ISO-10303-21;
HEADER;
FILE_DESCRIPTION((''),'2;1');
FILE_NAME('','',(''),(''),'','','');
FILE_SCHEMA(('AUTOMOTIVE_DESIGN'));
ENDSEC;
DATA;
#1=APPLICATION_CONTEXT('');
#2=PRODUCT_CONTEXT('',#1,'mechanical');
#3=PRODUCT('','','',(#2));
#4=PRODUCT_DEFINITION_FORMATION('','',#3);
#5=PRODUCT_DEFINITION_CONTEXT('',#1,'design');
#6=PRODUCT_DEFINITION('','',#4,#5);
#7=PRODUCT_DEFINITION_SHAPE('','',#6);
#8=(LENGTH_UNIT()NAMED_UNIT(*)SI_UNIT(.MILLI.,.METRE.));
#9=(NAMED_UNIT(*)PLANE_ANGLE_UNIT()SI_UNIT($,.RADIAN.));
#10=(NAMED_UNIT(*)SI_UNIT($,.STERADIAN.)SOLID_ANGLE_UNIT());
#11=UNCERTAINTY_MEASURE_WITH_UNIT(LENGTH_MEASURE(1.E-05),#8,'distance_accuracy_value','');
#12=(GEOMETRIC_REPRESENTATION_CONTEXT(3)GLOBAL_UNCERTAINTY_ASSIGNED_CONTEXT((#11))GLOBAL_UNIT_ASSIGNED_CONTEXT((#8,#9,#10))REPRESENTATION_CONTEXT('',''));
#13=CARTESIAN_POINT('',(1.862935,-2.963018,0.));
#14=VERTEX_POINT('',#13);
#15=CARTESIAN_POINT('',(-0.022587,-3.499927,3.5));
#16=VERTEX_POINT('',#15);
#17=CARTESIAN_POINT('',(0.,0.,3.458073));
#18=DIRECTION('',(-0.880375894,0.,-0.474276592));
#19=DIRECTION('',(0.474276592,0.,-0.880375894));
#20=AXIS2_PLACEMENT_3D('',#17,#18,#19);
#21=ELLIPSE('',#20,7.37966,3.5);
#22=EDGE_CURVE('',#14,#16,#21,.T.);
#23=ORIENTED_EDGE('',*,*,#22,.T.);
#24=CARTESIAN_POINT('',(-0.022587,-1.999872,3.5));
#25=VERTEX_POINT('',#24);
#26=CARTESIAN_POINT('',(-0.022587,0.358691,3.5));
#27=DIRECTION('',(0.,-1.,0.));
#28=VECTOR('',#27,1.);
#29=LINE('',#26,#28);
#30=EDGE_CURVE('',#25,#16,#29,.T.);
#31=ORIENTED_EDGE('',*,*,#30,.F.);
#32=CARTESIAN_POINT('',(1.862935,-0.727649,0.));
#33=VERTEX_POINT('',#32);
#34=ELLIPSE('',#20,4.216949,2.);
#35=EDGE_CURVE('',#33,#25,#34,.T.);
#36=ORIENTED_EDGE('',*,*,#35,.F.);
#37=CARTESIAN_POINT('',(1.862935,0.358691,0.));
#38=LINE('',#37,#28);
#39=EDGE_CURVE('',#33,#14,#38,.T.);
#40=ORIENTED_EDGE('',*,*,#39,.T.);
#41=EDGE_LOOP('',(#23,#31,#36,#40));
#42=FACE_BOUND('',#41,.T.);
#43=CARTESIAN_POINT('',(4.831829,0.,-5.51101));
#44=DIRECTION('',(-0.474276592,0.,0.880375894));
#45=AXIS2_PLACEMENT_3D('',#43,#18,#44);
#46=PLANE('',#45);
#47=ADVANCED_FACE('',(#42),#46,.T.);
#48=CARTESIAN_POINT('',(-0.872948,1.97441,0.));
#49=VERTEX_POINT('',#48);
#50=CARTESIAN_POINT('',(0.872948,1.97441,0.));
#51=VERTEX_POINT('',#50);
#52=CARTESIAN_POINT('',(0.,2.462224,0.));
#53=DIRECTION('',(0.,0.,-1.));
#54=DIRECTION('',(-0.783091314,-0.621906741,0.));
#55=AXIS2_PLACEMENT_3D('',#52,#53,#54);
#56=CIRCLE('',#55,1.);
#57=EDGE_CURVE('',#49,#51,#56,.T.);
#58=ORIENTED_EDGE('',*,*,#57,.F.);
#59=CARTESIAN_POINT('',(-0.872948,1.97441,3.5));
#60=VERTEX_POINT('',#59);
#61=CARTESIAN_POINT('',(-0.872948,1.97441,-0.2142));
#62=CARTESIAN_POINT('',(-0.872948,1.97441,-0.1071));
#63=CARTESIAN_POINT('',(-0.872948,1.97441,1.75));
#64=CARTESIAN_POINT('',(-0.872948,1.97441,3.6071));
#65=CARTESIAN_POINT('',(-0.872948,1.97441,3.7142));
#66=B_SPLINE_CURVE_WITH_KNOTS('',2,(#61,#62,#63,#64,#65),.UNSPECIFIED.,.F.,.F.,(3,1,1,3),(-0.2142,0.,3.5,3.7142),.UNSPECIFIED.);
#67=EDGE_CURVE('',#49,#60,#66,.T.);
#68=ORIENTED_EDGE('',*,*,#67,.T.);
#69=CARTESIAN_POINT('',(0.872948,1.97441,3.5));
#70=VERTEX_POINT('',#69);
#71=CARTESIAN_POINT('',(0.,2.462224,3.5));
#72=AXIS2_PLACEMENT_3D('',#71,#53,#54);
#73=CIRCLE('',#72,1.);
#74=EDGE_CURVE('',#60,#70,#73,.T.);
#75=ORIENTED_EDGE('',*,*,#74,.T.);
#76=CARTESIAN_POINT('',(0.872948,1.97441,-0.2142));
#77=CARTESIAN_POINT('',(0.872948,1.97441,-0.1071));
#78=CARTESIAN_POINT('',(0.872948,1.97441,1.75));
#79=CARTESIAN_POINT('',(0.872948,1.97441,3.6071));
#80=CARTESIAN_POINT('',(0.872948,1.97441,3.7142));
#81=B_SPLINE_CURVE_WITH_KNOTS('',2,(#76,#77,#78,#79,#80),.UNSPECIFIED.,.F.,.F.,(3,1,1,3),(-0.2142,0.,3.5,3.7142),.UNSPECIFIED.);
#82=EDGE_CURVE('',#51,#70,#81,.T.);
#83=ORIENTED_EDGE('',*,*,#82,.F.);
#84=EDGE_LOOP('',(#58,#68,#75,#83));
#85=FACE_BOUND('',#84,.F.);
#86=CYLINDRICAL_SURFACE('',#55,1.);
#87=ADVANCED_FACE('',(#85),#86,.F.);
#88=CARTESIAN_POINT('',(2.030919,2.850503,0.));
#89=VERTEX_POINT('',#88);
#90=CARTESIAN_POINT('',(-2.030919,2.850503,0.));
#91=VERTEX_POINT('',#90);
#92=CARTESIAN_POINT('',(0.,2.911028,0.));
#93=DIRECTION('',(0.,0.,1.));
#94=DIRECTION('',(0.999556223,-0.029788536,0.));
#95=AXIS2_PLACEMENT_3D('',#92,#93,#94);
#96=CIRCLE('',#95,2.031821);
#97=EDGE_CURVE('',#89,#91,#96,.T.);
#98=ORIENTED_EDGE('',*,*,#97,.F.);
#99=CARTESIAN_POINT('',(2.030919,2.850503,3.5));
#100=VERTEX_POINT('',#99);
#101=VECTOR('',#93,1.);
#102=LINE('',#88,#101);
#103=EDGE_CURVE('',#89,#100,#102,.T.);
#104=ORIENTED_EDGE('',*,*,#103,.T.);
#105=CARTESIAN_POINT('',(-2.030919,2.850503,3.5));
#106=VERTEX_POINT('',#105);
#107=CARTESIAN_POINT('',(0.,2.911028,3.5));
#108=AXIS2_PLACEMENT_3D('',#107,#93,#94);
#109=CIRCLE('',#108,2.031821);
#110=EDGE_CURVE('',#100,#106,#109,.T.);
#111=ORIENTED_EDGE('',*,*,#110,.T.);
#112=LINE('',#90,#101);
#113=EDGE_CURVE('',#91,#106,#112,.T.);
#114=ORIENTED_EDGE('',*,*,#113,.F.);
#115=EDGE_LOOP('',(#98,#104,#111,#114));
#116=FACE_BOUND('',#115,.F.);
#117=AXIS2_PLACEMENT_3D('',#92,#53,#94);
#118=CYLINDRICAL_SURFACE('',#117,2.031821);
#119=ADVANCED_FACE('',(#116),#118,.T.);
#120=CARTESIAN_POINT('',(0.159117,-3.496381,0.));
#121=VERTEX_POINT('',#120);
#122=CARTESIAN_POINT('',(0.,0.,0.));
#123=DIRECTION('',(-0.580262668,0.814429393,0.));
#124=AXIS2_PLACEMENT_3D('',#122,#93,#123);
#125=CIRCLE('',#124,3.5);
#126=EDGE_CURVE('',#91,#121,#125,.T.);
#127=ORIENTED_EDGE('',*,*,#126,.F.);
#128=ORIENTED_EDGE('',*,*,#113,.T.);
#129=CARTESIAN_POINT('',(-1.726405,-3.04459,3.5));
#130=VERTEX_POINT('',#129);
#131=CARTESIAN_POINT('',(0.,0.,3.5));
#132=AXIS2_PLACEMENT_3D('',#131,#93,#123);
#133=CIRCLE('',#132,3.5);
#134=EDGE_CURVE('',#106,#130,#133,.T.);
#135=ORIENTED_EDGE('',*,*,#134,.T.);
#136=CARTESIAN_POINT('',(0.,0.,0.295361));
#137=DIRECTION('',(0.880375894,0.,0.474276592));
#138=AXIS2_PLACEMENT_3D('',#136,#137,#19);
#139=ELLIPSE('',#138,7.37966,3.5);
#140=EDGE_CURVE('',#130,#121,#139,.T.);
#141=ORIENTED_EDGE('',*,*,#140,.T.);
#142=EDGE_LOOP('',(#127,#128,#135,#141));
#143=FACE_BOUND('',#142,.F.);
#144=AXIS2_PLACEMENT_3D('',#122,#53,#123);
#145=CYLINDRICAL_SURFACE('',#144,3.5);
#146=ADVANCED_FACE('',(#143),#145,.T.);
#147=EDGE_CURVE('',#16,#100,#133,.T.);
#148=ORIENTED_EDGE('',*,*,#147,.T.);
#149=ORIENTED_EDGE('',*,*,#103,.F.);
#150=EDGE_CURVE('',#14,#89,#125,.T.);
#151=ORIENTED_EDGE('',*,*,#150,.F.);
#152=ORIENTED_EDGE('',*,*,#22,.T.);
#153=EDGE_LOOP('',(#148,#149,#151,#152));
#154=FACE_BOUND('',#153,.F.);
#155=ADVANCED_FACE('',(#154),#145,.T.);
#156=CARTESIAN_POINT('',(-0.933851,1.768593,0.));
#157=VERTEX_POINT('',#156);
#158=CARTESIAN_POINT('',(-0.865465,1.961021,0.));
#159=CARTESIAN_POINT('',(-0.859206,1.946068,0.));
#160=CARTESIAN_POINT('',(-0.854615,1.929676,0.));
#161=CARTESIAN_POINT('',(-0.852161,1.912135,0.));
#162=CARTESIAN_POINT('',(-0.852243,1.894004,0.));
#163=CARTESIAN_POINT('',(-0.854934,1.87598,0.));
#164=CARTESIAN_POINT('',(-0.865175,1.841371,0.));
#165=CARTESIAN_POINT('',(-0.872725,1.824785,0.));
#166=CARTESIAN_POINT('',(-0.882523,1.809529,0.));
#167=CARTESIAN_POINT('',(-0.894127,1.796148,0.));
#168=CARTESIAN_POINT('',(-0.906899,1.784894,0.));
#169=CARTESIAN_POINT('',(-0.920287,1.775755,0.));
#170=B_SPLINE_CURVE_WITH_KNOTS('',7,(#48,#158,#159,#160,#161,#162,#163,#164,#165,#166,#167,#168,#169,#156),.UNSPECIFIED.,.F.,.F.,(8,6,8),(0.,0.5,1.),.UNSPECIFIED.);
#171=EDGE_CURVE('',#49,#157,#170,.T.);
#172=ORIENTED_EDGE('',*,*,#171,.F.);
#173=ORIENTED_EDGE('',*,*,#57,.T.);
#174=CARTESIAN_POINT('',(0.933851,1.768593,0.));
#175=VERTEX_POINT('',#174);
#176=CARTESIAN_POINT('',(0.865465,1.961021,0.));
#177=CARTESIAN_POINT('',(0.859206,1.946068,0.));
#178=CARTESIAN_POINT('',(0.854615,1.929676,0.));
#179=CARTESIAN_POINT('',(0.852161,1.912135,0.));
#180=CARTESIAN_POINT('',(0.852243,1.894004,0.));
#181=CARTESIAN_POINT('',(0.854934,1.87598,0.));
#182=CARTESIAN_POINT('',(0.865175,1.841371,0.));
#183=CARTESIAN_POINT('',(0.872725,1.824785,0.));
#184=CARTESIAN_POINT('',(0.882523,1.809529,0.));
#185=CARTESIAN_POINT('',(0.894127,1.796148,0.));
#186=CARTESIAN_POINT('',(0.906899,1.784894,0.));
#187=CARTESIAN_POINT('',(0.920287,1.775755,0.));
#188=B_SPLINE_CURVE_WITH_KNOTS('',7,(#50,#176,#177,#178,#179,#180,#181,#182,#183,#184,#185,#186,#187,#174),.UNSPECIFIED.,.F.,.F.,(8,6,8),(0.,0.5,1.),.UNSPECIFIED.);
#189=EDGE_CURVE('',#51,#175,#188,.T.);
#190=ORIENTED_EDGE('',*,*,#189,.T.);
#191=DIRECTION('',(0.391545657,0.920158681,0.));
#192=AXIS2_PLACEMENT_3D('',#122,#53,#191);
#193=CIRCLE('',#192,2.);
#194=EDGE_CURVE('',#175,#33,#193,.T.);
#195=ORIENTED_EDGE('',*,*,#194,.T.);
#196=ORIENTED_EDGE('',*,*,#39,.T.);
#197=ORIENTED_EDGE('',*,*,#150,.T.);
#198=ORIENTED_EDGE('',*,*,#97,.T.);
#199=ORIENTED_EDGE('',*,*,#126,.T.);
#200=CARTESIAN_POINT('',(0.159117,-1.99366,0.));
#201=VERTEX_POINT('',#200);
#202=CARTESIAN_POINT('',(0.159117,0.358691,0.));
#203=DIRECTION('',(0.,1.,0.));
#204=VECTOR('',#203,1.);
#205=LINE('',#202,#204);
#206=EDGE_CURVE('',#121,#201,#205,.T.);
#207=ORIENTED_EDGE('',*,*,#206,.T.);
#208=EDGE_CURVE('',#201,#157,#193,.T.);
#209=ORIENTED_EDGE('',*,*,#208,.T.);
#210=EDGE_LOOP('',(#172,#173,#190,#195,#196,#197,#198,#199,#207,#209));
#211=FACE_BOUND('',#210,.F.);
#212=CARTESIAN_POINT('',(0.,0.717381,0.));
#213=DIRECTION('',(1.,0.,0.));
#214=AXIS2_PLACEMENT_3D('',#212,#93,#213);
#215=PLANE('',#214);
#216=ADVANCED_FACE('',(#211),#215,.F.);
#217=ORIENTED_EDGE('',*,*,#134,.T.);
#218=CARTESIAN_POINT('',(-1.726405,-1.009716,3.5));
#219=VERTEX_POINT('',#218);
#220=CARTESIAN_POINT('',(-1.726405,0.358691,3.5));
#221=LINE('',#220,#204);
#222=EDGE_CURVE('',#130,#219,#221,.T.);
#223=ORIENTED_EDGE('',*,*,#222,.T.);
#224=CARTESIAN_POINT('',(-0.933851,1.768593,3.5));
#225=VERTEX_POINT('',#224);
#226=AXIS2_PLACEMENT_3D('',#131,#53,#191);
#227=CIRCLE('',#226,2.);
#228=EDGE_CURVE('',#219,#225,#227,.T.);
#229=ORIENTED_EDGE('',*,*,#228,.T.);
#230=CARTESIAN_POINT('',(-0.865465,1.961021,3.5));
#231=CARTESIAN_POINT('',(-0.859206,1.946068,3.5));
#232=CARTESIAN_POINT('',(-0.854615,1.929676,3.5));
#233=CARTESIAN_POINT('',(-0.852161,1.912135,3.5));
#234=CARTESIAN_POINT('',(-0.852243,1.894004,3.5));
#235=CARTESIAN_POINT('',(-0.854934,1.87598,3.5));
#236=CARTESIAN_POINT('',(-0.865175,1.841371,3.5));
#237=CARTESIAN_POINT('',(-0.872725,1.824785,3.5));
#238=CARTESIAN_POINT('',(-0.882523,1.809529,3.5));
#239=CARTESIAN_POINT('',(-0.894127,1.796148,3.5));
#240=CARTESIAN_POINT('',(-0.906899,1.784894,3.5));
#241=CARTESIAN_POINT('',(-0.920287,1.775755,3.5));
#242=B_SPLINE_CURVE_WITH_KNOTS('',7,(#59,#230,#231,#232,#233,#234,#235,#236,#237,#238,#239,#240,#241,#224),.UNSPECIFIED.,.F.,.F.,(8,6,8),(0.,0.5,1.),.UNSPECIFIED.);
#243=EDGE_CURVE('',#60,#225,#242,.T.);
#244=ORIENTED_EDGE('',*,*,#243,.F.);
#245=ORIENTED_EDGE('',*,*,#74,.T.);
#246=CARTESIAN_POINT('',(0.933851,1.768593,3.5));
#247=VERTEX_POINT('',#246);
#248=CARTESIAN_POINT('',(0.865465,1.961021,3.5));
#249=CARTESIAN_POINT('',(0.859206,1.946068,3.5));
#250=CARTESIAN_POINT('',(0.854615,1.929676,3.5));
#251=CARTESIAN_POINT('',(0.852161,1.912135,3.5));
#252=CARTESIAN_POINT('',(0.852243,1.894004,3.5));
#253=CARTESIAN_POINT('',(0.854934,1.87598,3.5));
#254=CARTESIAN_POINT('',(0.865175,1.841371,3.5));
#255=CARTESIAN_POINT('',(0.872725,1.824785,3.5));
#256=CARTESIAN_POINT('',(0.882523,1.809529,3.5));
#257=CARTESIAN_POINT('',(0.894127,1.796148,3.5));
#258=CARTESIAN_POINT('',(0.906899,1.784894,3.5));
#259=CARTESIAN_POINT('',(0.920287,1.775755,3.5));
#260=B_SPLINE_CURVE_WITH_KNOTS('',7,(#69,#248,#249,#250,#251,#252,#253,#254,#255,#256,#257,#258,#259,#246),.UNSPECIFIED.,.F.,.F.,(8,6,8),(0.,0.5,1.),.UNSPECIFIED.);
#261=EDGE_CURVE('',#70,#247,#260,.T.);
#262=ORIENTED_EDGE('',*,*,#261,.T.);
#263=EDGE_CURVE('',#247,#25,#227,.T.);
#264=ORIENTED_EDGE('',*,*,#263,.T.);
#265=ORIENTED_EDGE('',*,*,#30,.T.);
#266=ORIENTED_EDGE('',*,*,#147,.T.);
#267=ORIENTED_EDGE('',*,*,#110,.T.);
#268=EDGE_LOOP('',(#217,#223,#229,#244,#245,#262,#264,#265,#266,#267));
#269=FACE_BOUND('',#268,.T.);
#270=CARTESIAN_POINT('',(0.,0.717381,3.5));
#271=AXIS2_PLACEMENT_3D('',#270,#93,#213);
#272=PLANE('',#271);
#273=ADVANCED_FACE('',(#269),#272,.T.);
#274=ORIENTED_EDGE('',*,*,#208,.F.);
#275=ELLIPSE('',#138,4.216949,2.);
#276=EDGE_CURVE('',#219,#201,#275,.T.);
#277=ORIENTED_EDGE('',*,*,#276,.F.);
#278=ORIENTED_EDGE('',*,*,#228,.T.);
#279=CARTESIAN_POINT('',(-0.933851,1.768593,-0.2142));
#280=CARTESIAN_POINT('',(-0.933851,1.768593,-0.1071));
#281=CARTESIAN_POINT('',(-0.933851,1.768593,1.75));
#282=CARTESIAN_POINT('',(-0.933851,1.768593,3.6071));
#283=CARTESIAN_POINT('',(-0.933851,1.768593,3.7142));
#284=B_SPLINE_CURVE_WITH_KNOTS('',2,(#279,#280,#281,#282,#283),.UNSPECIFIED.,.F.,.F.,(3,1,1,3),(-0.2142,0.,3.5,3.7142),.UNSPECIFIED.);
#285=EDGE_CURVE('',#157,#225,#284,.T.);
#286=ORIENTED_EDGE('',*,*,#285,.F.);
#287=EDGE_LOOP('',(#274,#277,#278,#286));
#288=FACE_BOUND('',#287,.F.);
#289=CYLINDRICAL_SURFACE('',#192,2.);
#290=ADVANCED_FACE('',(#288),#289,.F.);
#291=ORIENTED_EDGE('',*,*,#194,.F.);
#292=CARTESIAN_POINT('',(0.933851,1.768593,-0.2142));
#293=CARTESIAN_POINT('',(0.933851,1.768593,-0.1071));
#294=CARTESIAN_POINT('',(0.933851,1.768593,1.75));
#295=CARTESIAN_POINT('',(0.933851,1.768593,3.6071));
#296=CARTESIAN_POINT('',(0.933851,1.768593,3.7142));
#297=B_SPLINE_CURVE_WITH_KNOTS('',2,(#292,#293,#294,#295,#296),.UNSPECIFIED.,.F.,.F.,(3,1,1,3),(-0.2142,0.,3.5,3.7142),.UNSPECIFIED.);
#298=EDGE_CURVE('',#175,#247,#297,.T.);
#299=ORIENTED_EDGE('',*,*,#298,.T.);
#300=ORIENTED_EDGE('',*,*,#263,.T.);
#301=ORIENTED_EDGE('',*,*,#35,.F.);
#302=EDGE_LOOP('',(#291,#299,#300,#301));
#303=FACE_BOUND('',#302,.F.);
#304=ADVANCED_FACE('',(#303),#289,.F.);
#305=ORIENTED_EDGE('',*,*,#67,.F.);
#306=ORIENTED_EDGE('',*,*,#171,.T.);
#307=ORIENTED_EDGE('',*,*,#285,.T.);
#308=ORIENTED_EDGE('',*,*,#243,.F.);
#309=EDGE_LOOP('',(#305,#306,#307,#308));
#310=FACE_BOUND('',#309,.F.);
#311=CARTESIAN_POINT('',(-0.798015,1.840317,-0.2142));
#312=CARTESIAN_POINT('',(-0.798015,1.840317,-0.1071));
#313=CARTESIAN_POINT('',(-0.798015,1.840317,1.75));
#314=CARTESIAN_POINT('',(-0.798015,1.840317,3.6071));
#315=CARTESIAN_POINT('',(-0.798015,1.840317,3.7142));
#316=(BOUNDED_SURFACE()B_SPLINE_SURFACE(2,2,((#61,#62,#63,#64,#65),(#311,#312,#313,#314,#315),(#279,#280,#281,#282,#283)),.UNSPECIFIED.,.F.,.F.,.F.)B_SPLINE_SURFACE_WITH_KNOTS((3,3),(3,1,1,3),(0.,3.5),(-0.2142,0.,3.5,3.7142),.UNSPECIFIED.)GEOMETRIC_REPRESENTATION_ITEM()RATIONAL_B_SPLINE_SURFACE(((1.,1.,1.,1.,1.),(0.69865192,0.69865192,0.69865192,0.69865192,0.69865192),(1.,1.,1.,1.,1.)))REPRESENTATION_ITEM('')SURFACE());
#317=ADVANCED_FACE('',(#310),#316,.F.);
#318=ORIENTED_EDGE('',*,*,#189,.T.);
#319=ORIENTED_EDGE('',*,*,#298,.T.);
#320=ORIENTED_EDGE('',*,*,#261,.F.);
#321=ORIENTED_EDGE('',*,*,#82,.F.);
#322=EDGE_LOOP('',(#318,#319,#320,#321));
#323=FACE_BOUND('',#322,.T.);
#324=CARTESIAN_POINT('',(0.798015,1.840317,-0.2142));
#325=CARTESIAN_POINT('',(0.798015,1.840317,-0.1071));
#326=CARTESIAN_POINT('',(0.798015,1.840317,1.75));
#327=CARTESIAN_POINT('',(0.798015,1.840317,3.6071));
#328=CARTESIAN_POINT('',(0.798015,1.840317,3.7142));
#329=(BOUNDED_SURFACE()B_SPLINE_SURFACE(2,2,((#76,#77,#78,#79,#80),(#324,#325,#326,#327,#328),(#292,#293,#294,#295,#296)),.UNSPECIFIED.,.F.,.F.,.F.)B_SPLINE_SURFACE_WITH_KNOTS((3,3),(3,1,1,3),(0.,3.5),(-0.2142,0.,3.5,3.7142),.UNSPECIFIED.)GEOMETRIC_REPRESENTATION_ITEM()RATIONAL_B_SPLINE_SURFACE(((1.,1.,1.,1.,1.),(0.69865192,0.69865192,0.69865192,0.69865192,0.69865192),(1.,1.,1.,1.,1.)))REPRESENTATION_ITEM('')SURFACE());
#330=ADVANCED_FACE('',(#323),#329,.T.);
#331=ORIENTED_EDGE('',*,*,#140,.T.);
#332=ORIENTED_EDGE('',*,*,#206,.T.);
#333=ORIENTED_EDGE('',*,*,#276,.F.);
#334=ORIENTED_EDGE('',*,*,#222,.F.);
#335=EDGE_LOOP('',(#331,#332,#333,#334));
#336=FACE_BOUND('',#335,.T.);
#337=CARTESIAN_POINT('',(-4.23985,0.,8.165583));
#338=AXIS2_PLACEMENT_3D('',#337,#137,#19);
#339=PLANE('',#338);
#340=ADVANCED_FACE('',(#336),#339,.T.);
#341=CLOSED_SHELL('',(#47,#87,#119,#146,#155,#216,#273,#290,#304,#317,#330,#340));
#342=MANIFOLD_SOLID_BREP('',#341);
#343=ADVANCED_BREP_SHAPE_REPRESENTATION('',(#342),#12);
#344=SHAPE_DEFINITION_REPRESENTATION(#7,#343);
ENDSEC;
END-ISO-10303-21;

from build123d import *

# Parameters (mm, degrees)
F1_DEPTH = 3.5
F2_R     = 0.15
F4_DEPTH = 25


with BuildPart() as f1:
    # F0 (on Top) → F1 (new body)
    with BuildSketch(Plane.XY):
        with BuildLine():
            ThreePointArc((2.0309193372, 2.850502876), (0, 4.9428488608), (-2.0309193372, 2.850502876))
            ThreePointArc((-2.0309193372, 2.850502876), (0, -3.5), (2.0309193372, 2.850502876))
        make_face()
        with BuildLine():
            ThreePointArc((0.7830913136, 1.8403173625), (0, -2), (-0.7830913136, 1.8403173625))
            ThreePointArc((-0.7830913136, 1.8403173625), (0, 3.4622241035), (0.7830913136, 1.8403173625))
        make_face(mode=Mode.SUBTRACT)
    extrude(amount=F1_DEPTH)

    # F2
    f2_edges = [f1.edges().sort_by_distance(p)[0] for p in [
        (-0.783091, 1.840317, 1.75),
        (0.783091, 1.840317, 1.75),
    ]]
    fillet(f2_edges, radius=F2_R)

    # F3 (on Front) → F4 (cut)
    with BuildSketch(Plane.XZ):
        Polygon((-2.6012919649, 8.286720852), (-4.2398504038, 8.1655834162), (3.1280116344, -5.5110100095), (4.8318293002, -5.5110100095), align=None)
    extrude(amount=F4_DEPTH, mode=Mode.SUBTRACT)


solid = f1.part
